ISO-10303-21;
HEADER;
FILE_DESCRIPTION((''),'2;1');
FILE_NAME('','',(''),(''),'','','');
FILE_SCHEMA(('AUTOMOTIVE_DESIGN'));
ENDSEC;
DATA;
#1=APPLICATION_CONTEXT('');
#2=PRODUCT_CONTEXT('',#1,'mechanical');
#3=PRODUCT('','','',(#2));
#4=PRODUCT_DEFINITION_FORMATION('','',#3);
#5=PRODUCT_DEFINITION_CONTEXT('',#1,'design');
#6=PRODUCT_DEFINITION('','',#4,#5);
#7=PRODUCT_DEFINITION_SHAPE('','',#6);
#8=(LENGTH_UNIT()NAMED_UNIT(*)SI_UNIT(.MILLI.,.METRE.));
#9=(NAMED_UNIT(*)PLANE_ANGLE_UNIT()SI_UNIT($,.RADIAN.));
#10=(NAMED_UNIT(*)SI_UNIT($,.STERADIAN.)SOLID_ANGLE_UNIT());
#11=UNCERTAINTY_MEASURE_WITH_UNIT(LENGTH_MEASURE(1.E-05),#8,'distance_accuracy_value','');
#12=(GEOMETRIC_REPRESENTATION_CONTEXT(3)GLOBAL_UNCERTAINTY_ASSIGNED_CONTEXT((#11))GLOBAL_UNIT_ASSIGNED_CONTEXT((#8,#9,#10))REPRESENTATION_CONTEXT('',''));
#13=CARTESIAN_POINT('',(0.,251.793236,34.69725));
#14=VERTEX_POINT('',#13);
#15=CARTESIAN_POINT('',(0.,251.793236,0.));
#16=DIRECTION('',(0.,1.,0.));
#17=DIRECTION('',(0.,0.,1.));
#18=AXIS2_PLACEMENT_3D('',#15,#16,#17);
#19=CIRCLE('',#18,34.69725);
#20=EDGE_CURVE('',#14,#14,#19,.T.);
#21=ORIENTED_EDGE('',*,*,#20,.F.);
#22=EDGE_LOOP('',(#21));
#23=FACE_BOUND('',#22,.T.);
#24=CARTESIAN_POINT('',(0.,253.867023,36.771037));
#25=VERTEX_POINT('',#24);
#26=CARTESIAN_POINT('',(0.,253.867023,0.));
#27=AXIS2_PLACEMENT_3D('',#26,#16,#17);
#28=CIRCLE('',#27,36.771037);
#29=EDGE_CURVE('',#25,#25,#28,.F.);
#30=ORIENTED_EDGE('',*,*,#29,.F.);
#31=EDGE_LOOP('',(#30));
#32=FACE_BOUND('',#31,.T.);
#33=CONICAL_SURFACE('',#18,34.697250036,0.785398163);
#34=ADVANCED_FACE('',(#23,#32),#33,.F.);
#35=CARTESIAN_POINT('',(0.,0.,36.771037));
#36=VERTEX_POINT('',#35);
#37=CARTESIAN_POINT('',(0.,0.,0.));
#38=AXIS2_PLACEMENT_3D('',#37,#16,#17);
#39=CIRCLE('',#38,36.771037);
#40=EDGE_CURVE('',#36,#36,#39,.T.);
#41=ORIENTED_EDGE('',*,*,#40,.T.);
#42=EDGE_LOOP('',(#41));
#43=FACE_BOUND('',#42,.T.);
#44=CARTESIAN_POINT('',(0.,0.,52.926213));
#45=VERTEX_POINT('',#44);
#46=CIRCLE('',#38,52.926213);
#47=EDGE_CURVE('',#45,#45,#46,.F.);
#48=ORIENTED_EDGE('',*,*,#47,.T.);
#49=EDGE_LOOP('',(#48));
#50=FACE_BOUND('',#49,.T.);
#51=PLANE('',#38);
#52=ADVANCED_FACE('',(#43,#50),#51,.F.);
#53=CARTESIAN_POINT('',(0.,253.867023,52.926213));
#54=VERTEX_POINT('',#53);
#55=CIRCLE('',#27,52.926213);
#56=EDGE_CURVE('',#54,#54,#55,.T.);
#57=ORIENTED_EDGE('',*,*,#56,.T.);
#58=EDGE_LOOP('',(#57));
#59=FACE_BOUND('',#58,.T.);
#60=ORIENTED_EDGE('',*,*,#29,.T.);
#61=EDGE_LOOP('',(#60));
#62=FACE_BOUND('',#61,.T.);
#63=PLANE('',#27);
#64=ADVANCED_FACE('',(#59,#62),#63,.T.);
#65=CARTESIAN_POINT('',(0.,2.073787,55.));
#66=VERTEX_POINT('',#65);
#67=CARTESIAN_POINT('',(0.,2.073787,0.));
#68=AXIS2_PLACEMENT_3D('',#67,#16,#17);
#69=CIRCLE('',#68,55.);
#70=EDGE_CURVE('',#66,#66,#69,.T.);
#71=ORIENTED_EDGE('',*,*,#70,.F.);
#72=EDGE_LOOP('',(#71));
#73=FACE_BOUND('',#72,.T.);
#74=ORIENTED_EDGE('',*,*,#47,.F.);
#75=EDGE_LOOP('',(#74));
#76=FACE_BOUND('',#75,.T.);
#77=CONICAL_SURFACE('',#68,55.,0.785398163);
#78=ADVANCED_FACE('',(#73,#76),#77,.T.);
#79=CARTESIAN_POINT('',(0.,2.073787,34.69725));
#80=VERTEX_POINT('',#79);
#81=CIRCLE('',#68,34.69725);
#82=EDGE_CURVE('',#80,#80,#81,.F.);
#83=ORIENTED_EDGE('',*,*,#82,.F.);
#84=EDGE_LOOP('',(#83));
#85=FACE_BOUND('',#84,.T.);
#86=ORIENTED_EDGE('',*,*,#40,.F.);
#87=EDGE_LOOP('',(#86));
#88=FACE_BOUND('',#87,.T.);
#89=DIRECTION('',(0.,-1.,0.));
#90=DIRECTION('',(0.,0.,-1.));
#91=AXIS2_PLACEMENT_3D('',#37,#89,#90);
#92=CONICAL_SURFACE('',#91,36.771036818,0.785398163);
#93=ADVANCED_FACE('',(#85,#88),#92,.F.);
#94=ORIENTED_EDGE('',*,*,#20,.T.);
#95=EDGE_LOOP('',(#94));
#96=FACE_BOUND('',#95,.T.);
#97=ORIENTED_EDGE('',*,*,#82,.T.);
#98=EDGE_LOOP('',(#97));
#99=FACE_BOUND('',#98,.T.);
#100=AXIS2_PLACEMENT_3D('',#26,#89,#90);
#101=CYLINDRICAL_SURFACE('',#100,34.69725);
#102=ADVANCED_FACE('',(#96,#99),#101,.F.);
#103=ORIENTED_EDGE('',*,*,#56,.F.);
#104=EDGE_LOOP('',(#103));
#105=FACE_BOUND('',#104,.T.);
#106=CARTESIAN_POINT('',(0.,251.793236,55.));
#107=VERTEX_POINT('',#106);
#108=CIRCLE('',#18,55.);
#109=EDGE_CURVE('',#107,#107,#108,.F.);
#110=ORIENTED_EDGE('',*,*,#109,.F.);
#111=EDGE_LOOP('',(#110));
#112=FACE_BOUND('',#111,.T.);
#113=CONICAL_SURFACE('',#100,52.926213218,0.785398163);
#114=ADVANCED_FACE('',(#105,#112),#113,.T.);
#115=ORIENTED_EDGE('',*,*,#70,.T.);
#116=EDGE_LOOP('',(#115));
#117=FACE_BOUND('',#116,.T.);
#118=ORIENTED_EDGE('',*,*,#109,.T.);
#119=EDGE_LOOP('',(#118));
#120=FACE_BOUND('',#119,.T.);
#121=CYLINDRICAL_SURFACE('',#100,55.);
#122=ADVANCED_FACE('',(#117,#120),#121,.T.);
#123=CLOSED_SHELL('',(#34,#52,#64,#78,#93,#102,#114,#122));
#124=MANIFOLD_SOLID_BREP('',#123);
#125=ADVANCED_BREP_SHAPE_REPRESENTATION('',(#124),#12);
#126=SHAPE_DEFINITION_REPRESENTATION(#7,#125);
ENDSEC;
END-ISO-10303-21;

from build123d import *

# Parameters (mm, degrees)
SKETCH1_R           = 55
BOSS_EXTRUDE1_DEPTH = 253.867022828
SKETCH2_R           = 34.697250036
CUT_EXTRUDE1_DEPTH  = 266.515470886
CHAMFER1_SIZE       = 2.073786782


with BuildPart() as part:
    # Sketch1 → Boss-Extrude1 (new body)
    with BuildSketch(Plane(origin=(0, 0, 0), x_dir=(1, 0, 0), z_dir=(0, 1, 0))):
        Circle(SKETCH1_R)
    extrude(amount=BOSS_EXTRUDE1_DEPTH)

    # Sketch2 → Cut-Extrude1 (cut, through all)
    with BuildSketch(Plane(origin=(0, 0, 0), x_dir=(1, 0, 0), z_dir=(0, 1, 0))):
        Circle(SKETCH2_R)
    extrude(amount=CUT_EXTRUDE1_DEPTH, mode=Mode.SUBTRACT)

    # Chamfer1
    chamfer1_edges = [part.edges().sort_by_distance(p)[0] for p in [
        (-34.697250036, 253.867022828, 0),
        (-34.697250036, 0, 0),
        (-55, 0, 0),
        (-55, 253.867022828, 0),
    ]]
    chamfer(chamfer1_edges, length=CHAMFER1_SIZE)


solid = part.part
